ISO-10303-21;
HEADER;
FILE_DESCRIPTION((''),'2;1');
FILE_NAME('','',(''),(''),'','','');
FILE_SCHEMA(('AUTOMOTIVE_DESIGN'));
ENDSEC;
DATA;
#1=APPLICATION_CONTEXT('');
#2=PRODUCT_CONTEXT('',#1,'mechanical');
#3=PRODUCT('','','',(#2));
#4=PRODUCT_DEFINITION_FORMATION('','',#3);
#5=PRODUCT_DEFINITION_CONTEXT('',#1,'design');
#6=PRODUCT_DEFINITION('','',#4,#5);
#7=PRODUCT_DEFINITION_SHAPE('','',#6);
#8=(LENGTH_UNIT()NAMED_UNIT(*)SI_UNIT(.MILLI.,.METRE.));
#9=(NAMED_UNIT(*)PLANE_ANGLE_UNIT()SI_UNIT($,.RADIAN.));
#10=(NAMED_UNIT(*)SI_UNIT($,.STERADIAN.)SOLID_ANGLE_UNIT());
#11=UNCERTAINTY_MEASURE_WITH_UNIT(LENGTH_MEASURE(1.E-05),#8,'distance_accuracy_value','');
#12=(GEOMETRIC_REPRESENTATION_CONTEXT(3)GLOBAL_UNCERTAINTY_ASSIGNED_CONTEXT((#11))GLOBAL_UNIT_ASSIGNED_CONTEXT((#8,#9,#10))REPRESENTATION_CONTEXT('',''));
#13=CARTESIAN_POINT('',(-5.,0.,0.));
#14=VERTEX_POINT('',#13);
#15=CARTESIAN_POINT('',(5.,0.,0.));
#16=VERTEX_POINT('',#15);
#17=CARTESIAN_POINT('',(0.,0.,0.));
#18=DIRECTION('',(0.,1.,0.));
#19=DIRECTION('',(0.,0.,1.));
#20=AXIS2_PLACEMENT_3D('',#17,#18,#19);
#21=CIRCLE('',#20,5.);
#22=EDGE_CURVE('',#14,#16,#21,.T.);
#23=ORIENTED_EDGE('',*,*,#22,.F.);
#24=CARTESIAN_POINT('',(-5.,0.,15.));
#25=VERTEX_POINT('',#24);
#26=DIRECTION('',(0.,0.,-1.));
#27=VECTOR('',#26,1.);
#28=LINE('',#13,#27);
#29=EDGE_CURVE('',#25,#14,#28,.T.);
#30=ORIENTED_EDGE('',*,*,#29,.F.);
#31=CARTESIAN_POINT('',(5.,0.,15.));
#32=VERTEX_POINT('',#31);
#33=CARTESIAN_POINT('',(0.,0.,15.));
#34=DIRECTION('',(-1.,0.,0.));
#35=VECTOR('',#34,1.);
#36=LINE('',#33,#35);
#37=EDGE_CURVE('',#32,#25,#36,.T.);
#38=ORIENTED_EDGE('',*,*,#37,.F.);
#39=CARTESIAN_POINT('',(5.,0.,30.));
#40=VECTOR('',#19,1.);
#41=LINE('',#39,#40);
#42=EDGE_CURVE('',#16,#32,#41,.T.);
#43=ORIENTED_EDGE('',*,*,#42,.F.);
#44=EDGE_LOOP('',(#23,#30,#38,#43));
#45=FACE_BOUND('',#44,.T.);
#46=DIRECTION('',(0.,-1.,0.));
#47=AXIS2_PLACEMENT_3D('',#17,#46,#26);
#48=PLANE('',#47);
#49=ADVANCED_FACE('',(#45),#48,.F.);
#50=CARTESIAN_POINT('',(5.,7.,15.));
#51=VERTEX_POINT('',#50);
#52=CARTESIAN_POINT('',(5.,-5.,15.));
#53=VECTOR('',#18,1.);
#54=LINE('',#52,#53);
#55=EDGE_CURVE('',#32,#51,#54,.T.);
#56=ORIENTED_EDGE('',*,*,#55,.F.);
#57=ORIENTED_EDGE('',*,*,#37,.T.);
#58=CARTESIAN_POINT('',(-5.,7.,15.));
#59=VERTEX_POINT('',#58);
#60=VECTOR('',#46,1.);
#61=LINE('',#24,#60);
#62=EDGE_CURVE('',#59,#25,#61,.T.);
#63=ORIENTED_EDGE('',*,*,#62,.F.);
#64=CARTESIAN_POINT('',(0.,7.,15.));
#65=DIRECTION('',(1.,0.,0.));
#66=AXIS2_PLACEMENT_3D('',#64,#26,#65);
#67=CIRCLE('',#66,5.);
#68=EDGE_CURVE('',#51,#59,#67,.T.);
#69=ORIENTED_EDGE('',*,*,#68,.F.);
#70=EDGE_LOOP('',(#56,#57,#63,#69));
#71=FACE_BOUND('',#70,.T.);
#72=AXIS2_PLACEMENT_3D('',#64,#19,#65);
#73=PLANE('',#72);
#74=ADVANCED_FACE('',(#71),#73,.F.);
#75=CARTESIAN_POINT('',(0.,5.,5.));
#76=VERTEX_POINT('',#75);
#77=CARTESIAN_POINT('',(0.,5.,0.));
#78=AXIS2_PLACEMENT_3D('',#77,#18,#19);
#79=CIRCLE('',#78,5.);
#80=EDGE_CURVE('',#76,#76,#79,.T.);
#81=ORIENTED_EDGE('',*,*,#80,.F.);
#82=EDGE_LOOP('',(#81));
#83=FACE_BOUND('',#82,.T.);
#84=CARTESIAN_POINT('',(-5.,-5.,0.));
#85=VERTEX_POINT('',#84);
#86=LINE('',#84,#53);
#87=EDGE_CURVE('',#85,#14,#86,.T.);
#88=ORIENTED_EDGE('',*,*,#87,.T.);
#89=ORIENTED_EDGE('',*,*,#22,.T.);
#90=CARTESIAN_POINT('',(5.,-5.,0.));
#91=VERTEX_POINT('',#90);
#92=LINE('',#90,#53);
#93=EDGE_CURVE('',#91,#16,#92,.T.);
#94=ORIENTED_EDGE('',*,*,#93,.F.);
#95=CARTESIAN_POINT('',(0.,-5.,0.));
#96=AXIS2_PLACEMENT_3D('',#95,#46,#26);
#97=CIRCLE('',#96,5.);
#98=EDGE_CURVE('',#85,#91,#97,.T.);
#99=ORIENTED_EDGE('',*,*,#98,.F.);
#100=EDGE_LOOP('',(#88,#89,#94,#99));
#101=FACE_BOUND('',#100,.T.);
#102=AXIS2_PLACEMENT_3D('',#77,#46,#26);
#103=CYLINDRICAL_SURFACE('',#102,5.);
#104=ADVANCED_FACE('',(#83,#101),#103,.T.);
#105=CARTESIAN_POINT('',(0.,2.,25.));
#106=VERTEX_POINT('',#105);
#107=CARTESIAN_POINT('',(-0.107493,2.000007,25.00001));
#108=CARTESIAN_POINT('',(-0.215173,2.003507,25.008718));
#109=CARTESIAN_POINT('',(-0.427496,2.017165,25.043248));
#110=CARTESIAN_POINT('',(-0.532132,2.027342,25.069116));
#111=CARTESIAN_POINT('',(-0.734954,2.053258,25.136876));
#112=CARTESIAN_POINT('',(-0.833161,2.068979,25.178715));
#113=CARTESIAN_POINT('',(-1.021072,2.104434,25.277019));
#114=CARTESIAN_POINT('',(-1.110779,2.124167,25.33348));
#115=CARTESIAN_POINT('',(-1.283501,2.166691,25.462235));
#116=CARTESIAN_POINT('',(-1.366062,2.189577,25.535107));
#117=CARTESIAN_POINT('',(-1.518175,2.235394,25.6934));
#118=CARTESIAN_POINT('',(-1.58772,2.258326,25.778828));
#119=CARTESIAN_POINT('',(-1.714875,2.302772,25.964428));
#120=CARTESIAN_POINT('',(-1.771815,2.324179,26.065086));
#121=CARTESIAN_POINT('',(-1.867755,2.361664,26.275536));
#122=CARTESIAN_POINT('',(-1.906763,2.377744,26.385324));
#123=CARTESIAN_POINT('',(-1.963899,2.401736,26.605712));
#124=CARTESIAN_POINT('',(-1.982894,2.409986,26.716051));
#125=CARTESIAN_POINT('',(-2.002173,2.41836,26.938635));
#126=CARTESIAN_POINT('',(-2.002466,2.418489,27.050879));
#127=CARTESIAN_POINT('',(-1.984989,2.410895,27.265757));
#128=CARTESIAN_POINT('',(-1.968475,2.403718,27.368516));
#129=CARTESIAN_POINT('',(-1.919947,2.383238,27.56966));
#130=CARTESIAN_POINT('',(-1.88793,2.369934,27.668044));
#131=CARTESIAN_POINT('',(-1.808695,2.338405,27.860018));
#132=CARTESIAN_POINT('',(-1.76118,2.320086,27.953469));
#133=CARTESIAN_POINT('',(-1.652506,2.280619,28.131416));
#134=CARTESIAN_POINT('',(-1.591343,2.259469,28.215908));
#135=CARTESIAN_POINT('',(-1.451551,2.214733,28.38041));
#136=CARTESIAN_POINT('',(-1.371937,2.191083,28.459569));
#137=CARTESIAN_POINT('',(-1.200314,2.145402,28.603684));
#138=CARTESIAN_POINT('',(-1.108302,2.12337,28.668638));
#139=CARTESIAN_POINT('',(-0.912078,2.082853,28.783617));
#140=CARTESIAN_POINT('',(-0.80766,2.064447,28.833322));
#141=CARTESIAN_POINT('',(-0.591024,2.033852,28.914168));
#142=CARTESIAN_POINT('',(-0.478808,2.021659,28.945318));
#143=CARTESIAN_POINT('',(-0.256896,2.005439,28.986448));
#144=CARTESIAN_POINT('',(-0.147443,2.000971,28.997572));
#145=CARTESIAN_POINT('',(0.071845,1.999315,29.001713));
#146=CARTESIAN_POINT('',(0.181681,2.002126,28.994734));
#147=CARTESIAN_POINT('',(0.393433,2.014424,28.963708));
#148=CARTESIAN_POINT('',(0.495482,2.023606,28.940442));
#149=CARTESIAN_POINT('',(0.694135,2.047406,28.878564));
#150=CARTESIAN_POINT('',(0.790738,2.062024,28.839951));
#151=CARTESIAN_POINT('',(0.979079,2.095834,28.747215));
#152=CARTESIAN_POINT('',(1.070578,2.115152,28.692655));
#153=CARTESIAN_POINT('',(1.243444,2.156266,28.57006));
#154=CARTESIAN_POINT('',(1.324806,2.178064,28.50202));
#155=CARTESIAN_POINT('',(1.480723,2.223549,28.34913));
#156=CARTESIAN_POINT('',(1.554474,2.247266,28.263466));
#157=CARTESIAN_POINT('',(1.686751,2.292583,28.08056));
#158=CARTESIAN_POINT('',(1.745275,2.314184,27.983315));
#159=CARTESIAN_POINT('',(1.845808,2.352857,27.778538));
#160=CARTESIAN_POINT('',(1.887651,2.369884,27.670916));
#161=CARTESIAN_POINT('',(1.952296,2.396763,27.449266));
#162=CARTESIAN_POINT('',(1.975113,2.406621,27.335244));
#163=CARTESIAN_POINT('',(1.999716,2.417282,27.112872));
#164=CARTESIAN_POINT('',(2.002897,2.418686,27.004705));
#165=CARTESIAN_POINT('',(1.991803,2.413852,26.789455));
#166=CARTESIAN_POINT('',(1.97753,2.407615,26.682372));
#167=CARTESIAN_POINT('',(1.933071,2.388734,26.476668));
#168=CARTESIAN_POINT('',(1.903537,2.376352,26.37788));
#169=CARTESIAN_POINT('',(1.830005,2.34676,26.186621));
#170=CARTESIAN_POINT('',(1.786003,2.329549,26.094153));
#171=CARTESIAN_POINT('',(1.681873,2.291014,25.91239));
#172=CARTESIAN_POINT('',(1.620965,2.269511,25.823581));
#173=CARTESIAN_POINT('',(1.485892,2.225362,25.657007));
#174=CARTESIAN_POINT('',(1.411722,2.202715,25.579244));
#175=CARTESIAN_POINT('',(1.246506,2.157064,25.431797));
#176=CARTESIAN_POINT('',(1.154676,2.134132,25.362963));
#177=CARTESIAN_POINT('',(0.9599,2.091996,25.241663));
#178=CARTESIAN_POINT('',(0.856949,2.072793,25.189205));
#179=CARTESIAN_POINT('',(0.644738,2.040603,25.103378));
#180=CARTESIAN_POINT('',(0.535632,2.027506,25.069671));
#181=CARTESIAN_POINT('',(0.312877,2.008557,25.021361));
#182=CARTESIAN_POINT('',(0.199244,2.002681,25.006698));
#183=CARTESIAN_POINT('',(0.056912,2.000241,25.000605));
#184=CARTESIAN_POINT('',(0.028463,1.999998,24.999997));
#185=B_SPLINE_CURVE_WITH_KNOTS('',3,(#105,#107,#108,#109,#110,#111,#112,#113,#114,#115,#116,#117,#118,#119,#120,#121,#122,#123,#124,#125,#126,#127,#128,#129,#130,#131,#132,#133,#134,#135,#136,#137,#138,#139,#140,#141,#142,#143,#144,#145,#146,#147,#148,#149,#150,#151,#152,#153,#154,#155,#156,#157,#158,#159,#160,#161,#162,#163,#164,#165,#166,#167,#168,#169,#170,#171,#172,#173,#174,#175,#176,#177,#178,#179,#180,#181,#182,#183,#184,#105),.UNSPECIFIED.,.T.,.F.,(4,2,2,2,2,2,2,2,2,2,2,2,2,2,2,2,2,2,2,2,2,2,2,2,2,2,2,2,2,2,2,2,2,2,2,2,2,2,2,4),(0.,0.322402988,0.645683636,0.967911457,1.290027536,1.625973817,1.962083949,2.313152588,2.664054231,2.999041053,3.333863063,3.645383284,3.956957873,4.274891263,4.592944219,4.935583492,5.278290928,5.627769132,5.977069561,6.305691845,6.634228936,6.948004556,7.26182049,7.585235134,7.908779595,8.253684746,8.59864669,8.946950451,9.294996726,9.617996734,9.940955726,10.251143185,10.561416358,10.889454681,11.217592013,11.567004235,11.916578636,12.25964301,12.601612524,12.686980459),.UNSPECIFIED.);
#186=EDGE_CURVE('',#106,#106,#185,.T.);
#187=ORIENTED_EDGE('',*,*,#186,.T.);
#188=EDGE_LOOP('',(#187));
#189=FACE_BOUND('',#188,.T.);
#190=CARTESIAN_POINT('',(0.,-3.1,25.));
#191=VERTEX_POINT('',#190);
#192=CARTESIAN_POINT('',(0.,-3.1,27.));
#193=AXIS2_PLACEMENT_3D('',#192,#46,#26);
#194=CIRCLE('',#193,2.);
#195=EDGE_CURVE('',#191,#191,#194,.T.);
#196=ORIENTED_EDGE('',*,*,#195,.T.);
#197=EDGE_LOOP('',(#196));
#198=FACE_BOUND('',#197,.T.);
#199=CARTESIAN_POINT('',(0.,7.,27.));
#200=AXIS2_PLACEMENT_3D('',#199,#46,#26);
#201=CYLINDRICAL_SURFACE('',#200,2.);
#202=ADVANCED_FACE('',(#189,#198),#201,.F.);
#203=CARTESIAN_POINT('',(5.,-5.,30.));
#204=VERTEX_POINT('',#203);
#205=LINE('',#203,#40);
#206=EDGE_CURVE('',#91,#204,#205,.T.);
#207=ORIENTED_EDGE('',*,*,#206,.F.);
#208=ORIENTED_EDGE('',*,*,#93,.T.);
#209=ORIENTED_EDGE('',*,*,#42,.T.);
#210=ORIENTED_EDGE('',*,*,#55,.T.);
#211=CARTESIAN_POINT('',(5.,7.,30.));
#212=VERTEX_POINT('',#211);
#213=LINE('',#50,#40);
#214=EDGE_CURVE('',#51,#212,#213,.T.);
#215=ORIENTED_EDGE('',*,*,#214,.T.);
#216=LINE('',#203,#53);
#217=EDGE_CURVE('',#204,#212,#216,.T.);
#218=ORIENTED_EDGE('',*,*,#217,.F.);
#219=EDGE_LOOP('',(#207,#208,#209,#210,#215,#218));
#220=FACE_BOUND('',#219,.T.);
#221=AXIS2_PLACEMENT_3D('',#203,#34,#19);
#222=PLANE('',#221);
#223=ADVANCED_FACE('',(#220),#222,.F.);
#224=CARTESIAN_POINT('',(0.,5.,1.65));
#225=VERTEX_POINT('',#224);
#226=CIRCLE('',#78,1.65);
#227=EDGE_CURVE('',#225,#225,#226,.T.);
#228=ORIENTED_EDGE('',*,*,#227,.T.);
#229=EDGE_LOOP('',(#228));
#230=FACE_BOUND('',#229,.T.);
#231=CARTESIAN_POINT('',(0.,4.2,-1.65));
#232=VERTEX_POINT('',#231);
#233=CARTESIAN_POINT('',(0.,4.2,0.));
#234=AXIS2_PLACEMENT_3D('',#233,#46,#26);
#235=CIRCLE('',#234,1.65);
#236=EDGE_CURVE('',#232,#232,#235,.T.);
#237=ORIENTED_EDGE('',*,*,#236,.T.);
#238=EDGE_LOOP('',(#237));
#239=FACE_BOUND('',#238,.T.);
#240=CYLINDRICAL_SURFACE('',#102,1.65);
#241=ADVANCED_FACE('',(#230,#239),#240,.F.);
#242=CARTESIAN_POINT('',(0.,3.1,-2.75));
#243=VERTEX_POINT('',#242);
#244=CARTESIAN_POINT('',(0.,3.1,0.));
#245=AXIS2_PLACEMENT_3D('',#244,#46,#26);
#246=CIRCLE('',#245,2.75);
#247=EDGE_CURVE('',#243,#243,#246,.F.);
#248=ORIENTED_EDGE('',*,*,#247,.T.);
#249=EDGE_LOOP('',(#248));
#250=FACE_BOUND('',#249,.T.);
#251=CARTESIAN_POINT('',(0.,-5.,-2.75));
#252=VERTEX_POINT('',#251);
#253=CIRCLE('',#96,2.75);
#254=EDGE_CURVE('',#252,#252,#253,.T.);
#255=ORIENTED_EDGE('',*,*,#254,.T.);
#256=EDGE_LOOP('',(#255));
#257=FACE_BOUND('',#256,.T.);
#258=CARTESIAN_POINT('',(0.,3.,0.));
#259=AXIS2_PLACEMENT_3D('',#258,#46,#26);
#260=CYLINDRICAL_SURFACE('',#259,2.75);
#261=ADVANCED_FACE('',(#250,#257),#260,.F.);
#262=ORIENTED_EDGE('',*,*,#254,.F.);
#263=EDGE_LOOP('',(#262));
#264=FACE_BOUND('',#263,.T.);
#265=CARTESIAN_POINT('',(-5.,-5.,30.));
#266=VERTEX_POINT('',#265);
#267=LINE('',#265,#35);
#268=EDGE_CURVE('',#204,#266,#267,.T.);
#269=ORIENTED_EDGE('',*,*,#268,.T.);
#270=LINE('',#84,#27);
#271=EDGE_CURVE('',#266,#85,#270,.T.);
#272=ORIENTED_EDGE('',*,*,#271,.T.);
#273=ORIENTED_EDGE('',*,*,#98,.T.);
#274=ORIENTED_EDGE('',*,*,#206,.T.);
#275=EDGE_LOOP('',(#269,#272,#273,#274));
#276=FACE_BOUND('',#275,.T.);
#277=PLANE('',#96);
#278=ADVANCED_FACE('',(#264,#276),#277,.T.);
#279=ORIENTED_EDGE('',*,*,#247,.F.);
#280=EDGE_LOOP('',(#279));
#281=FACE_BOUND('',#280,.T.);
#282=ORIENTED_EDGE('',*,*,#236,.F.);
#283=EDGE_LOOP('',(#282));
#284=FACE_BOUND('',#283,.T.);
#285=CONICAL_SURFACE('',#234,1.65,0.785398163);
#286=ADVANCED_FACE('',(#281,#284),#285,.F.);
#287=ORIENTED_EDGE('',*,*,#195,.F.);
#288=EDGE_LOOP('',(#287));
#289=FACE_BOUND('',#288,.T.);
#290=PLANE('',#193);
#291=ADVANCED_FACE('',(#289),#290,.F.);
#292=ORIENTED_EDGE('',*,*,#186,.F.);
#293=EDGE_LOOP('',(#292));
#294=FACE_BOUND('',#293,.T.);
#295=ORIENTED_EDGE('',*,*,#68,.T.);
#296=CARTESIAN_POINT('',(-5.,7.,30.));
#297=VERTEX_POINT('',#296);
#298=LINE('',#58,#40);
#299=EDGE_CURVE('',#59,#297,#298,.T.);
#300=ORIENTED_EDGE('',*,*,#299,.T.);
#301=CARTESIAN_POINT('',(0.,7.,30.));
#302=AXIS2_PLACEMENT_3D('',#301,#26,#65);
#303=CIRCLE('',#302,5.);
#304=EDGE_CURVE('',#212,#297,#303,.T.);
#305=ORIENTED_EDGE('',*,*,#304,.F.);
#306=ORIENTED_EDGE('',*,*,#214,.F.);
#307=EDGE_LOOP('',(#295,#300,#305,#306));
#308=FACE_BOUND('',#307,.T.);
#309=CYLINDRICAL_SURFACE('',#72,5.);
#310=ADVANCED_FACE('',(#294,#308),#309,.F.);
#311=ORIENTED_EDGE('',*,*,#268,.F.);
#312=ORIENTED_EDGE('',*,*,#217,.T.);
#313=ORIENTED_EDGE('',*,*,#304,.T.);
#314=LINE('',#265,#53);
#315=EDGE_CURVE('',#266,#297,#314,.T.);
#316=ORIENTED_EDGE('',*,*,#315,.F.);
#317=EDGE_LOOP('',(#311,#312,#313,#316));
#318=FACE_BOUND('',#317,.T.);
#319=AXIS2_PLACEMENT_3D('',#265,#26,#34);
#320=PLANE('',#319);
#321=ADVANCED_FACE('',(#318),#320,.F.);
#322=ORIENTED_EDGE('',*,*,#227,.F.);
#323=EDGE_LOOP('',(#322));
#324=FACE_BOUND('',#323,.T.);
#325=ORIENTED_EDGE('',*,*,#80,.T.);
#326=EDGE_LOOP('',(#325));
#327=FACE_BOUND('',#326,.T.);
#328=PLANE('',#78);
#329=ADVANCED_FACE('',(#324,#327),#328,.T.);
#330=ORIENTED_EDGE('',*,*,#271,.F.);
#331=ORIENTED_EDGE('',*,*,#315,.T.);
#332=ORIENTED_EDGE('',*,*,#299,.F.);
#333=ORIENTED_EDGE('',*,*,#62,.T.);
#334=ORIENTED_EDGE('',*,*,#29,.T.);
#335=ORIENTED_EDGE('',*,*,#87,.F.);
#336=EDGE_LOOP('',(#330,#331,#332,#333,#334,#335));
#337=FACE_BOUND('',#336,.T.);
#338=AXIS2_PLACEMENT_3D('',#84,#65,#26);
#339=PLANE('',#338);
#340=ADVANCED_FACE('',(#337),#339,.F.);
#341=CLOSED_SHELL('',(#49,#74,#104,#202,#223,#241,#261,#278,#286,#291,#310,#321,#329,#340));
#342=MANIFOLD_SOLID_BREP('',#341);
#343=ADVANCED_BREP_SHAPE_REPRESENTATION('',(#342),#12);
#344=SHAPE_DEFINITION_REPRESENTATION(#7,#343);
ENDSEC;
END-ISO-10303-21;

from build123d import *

# Parameters (mm, degrees)
SKETCH1_R           = 5
SKETCH1_R_2         = 1.65
BOSS_EXTRUDE1_DEPTH = 5
BOSS_EXTRUDE2_START = 5
BOSS_EXTRUDE2_DEPTH = 5
BOSS_EXTRUDE3_DEPTH = 15
CUT_EXTRUDE1_START  = -1.9
SKETCH4_R           = 2
CUT_EXTRUDE1_DEPTH  = 31.795565449
SKETCH6_R           = 2.75
CUT_EXTRUDE2_DEPTH  = 8
CHAMFER1_SIZE       = 1.2


with BuildPart() as part:
    # Sketch1 → Boss-Extrude1 (new body)
    with BuildSketch(Plane(origin=(0, 0, 0), x_dir=(1, 0, 0), z_dir=(0, 1, 0))):
        with Locations(Location((0, 0, 0), (0, 0, 270))):
            Circle(SKETCH1_R)
        with Locations(Location((0, 0, 0), (0, 0, 270))):
            Circle(SKETCH1_R_2, mode=Mode.SUBTRACT)
    extrude(amount=BOSS_EXTRUDE1_DEPTH)

    # Sketch2 → Boss-Extrude2 (add)
    with BuildSketch(Plane.XZ.offset(BOSS_EXTRUDE2_START)):
        with BuildLine():
            Line((-5, 0), (-5, 30))
            Line((-5, 30), (5, 30))
            Line((5, 30), (5, 0))
            ThreePointArc((5, 0), (0, -5), (-5, 0))
        make_face()
    extrude(amount=-BOSS_EXTRUDE2_DEPTH)

    # Sketch3 → Boss-Extrude3 (add)
    with BuildSketch(Plane.XY.offset(30)):
        with BuildLine():
            Line((-5, 0), (-5, 7))
            ThreePointArc((-5, 7), (0, 2), (5, 7))
            Line((5, 7), (5, 0))
            Line((5, 0), (5, -5))
            Line((5, -5), (-5, -5))
            Line((-5, -5), (-5, 0))
        make_face()
    extrude(amount=-BOSS_EXTRUDE3_DEPTH)

    # Sketch4 → Cut-Extrude1 (cut, through all)
    with BuildSketch(Plane.XZ.offset(5).offset(CUT_EXTRUDE1_START)):
        with Locations(Location((0, 27, 0), (0, 0, 270))):
            Circle(SKETCH4_R)
    extrude(amount=-CUT_EXTRUDE1_DEPTH, mode=Mode.SUBTRACT)

    # Sketch6 → Cut-Extrude2 (cut)
    with BuildSketch(Plane.XZ.offset(5)):
        with Locations(Location((0, 0, 0), (0, 0, 270))):
            Circle(SKETCH6_R)
    extrude(amount=-CUT_EXTRUDE2_DEPTH, mode=Mode.SUBTRACT)

    # Chamfer1
    # the kernel refuses this chamfer: 1.2 mm, written as the material it takes off along each edge
    with BuildSketch(Plane(origin=(0, 3, 0), x_dir=(0, 0, 1), z_dir=(1, 0, 0))) as chamfer1_piece_1_section:
        Polygon((1.65, -CHAMFER1_SIZE), (1.65 + CHAMFER1_SIZE, 0), (1.65, 0), align=None)
    chamfer1_piece_1 = revolve(axis=Axis((0, 3, 0), (0, -1, 0)), mode=Mode.PRIVATE)
    chamfer1_piece_1 = chamfer1_piece_1 & Plane(origin=(0, 3.651745374, 0), x_dir=(0, 0, -1), z_dir=(0, -1, 0)) * Cylinder(2.75, 12, mode=Mode.PRIVATE)
    add(chamfer1_piece_1, mode=Mode.SUBTRACT)


solid = part.part
